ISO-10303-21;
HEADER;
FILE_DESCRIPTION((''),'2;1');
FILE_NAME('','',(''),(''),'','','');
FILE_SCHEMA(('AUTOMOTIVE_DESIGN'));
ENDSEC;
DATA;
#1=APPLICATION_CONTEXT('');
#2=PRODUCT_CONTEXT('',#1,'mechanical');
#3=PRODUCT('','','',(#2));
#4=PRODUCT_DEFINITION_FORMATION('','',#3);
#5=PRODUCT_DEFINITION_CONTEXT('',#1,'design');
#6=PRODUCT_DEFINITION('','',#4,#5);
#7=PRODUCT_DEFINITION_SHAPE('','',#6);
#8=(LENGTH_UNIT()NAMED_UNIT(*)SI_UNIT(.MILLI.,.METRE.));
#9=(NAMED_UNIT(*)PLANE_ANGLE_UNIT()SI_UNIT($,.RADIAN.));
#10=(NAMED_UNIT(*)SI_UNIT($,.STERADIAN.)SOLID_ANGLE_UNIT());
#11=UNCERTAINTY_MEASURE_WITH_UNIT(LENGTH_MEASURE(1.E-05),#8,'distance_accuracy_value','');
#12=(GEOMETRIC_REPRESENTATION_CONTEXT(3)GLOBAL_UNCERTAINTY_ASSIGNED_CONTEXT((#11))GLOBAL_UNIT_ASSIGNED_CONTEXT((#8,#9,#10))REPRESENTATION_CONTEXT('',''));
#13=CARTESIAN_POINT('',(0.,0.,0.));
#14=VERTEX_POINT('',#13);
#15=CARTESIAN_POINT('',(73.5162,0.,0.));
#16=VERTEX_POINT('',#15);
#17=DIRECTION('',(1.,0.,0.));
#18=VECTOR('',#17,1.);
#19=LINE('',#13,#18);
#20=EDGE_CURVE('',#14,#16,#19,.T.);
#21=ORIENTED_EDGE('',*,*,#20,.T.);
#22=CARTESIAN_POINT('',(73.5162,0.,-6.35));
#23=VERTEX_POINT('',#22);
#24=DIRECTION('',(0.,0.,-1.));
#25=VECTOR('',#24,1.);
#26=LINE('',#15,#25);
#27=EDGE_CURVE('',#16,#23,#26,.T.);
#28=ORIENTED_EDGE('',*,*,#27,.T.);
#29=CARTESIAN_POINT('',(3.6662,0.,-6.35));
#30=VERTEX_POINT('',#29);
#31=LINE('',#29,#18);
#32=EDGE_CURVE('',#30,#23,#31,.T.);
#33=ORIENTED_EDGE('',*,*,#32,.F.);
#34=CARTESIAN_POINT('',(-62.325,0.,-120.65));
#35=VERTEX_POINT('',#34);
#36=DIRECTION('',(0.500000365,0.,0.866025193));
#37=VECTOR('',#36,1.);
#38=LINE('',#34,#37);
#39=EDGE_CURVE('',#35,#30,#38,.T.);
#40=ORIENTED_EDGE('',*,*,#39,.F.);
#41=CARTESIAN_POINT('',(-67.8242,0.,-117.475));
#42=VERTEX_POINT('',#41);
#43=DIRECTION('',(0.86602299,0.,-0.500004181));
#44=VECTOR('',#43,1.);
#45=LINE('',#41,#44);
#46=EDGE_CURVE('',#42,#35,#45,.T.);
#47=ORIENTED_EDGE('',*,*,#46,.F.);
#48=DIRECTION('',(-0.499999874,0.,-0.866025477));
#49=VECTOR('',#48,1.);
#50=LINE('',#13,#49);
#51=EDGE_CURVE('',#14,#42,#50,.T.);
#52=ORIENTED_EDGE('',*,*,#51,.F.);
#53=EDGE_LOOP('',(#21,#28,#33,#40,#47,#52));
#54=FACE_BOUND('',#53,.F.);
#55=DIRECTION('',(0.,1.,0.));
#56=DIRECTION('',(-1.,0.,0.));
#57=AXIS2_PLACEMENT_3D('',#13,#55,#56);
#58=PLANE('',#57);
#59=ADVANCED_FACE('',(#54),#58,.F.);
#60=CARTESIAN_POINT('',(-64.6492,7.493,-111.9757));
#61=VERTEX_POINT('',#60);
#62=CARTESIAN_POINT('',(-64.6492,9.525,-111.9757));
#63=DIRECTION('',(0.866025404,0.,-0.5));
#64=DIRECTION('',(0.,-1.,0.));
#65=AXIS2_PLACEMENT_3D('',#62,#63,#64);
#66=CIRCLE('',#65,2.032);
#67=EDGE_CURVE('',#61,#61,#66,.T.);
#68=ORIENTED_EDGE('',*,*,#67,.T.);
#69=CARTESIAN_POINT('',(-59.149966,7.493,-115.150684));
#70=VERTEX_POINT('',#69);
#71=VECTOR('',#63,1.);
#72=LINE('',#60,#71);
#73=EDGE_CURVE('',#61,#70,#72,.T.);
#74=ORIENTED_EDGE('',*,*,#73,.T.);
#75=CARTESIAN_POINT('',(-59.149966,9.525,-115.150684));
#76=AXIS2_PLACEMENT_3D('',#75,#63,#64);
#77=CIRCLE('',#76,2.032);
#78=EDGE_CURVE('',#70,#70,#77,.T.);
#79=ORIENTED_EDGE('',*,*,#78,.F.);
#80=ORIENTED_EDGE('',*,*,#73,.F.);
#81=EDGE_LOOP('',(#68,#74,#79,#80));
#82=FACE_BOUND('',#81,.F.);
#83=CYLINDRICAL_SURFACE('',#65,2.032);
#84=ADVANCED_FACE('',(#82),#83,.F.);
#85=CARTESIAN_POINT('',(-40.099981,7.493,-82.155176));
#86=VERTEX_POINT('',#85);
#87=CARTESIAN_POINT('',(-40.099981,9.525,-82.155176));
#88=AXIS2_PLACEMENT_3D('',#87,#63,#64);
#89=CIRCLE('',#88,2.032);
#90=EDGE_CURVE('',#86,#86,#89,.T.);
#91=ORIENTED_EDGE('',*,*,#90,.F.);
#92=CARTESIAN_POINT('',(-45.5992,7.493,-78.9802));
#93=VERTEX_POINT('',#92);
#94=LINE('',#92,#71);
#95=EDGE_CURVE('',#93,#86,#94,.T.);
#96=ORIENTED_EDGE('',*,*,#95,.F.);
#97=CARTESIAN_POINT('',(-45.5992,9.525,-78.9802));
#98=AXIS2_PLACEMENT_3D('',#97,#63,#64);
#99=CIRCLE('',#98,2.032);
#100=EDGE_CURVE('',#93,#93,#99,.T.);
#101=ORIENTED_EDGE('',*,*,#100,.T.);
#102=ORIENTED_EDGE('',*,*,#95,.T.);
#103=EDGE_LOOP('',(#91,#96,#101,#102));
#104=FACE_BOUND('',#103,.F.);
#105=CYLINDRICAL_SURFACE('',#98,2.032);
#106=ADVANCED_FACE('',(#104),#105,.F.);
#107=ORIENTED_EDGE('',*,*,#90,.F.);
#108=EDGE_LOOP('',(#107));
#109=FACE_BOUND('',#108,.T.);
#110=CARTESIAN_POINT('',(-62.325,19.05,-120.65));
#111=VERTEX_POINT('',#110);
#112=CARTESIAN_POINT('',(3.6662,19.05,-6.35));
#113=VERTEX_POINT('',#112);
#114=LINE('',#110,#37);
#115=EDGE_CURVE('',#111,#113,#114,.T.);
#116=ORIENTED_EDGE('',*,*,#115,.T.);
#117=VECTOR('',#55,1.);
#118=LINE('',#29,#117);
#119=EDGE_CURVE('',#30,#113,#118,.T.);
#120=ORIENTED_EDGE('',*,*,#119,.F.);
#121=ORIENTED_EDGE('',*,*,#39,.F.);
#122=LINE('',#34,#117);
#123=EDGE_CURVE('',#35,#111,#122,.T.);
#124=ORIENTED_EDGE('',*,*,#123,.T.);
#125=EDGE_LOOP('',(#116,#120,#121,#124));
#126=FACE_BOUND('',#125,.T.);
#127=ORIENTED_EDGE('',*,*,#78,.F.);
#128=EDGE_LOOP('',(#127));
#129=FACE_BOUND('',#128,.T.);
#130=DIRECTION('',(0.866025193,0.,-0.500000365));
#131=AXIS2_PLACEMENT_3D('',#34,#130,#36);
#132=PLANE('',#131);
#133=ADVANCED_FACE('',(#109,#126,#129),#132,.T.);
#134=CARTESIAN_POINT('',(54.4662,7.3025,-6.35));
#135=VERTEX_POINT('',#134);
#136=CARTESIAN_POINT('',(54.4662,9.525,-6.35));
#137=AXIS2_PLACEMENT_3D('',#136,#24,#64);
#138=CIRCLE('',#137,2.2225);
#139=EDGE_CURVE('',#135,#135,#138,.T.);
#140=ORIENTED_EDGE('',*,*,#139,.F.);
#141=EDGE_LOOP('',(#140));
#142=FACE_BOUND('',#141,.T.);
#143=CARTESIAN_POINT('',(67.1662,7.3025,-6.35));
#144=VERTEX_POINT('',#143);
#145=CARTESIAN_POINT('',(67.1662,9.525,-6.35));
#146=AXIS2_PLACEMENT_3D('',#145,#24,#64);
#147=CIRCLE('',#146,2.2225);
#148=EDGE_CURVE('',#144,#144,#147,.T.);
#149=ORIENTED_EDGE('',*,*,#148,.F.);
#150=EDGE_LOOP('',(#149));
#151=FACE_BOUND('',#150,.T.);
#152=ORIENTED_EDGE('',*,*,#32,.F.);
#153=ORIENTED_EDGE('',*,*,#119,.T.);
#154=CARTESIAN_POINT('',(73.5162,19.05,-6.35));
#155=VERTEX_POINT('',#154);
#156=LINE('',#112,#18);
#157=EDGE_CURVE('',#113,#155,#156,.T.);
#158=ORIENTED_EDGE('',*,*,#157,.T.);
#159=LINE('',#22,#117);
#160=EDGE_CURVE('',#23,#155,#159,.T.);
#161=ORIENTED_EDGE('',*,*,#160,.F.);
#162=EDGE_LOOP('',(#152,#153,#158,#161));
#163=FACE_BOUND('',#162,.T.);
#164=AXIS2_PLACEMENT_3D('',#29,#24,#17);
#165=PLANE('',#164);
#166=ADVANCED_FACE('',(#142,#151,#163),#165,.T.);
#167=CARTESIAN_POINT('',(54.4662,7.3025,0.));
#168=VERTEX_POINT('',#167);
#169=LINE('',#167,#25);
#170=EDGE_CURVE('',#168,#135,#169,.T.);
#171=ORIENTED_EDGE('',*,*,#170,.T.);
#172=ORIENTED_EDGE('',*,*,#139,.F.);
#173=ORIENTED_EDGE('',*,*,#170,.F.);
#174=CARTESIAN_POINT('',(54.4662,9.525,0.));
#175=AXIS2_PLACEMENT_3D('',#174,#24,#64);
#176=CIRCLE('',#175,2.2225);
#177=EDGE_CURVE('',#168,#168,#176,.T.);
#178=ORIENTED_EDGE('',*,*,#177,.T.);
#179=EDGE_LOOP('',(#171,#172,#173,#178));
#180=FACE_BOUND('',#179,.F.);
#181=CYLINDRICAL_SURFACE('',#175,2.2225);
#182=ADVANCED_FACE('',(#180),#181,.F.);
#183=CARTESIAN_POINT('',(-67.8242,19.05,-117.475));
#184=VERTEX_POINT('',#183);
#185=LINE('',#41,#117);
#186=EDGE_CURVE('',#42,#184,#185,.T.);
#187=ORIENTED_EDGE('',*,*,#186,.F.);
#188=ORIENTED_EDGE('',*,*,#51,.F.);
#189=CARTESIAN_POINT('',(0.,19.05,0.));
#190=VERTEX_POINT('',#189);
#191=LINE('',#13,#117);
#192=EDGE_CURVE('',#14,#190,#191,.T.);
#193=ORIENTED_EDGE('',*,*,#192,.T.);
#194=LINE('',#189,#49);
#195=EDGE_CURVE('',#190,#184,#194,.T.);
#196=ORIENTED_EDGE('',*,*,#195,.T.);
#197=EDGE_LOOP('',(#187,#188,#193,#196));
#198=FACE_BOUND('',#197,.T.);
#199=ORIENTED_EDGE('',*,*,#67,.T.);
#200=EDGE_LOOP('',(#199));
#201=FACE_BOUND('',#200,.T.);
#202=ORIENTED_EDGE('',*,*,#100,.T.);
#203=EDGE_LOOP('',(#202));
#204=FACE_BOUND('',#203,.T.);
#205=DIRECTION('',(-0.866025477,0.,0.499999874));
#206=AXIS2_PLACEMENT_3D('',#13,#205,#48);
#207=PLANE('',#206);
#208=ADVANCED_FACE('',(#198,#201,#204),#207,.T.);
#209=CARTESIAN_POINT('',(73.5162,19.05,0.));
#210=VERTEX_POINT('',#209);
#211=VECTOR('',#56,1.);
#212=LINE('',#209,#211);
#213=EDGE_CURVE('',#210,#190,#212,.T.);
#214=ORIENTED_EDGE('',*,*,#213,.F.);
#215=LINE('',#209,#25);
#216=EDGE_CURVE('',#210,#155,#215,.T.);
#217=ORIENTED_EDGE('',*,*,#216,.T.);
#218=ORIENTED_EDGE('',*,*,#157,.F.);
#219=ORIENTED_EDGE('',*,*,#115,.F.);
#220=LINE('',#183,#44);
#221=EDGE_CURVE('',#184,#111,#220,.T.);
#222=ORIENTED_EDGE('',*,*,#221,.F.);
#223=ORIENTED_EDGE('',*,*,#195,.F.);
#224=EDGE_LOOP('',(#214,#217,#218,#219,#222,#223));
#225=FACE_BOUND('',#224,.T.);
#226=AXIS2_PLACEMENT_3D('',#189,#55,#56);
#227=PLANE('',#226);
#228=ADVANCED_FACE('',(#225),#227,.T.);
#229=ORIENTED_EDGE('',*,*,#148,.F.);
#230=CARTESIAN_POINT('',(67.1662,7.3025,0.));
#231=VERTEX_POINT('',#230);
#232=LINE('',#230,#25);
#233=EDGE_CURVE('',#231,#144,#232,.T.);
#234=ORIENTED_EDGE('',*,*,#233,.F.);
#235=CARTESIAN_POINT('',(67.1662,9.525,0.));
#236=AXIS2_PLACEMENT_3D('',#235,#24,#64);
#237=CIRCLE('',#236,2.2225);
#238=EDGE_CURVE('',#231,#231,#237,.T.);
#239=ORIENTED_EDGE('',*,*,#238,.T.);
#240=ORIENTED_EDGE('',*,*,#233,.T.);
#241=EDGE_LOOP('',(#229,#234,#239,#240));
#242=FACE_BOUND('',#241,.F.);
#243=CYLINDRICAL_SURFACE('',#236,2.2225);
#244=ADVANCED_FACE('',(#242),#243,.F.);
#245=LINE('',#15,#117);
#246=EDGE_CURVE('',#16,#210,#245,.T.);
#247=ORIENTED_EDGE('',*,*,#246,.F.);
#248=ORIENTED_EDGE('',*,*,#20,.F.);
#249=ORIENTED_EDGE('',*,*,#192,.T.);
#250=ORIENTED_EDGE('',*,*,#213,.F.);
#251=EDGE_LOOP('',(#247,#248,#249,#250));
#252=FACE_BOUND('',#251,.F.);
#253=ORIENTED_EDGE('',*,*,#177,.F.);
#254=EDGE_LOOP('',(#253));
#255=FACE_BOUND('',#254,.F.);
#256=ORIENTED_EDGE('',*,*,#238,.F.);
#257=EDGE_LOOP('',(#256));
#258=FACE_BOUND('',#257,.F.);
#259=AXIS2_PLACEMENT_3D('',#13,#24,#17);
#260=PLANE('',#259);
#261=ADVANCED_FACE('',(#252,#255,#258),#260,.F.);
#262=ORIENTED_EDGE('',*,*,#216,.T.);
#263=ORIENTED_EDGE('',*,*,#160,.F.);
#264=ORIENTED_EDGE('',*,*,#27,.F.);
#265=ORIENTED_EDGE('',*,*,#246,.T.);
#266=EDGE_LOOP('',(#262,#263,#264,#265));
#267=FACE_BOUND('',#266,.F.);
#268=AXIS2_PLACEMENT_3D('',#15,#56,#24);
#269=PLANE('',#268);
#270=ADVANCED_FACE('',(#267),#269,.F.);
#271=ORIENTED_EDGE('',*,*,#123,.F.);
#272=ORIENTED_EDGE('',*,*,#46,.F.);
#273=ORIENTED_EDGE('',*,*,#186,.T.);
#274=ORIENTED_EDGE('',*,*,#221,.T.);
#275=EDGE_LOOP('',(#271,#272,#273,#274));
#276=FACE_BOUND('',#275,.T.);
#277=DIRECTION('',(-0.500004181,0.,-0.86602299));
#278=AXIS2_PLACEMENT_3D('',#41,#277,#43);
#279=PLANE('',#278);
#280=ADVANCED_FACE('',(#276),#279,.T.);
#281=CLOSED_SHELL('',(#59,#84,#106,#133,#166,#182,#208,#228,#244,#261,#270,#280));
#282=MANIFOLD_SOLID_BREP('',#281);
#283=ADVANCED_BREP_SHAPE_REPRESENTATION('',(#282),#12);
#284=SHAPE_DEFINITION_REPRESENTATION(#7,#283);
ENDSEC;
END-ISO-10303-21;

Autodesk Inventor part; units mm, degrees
ref_plane "YZ Plane" through (0, 0, 0) normal (1, 0, 0) x (0, 1, 0)
ref_plane "XZ Plane" through (0, 0, 0) normal (0, 1, 0) x (-1, 0, 0)
ref_plane "XY Plane" through (0, 0, 0) normal (0, 0, 1) x (1, 0, 0)
sketch "Sketch1" plane through (0, 0, 0) normal (0, 1, 0) x (-1, 0, 0)
  line L0 (0, 0) -> (67.8242, -117.475)
  line L1 (0, 0) -> (135.6484, 0) construction
  line L2 (67.8242, -117.475) -> (62.325, -120.65)
  line L3 (62.325, -120.65) -> (-3.6662, -6.35)
  line L4 (-0.56, 0) -> (-73.5162, 0)
  line L5 (-73.5162, 0) -> (-73.5162, -6.35)
  line L6 (-3.6662, -6.35) -> (-73.5162, -6.35)
  line L7 (0, 0) -> (-0.56, 0)
  dimension "d0" = 60
  dimension "d2" = 6.35
  dimension "d3" = 6.35
  dimension "d4" = 0
  dimension "d5" = 114.3
  dimension "d6" = 69.85
extrude "Extrusion1" add sketch "Sketch1" along normal blind 19.05
sketch "Sketch2" plane through (0, 0, 0) normal (0, 0, 1) x (1, 0, 0)
  line L0 (73.5162, 0) -> (0, 0) projected
  line L1 (73.5162, 0) -> (73.5162, 19.05) projected
  line L2 (0, 19.05) -> (73.5162, 19.05) projected
  line L3 (0, 0) -> (0, 19.05) projected
  point P0 (67.1662, 9.525)
  point P1 (54.4662, 9.525)
  dimension "d9" = 6.35
  dimension "d10" = 19.05
  dimension "d11" = 9.525
  dimension "d12" = 9.525
hole "Hole1" at (67.1662, 9.525, 0) at (54.4662, 9.525, 0) direction (0, 0, -1) diameter 4.445 end through all
sketch "Sketch3" plane through (0, 0, 0) normal (-0.8660254, 0, 0.5) x (0.5, 0, 0.8660254)
  line L0 (0, 0) -> (-135.6484, 0) projected
  line L1 (0, 0) -> (0, 19.05) projected
  line L2 (-135.6484, 19.05) -> (0, 19.05) projected
  line L3 (-135.6484, 0) -> (-135.6484, 19.05) projected
  point P0 (-129.2984, 9.525)
  point P1 (-91.1984, 9.525)
  dimension "d20" = 6.35
  dimension "d21" = 44.45
  dimension "d22" = 9.525
  dimension "d23" = 9.525
hole "Hole2" at (-64.6492, 9.525, -111.9757) at (-45.5992, 9.525, -78.9802) direction (0.8660254, 0, -0.5) diameter 4.064 end through all
equation "\"d12\" = d11"
properties part number "CollectionAngleBracket"
